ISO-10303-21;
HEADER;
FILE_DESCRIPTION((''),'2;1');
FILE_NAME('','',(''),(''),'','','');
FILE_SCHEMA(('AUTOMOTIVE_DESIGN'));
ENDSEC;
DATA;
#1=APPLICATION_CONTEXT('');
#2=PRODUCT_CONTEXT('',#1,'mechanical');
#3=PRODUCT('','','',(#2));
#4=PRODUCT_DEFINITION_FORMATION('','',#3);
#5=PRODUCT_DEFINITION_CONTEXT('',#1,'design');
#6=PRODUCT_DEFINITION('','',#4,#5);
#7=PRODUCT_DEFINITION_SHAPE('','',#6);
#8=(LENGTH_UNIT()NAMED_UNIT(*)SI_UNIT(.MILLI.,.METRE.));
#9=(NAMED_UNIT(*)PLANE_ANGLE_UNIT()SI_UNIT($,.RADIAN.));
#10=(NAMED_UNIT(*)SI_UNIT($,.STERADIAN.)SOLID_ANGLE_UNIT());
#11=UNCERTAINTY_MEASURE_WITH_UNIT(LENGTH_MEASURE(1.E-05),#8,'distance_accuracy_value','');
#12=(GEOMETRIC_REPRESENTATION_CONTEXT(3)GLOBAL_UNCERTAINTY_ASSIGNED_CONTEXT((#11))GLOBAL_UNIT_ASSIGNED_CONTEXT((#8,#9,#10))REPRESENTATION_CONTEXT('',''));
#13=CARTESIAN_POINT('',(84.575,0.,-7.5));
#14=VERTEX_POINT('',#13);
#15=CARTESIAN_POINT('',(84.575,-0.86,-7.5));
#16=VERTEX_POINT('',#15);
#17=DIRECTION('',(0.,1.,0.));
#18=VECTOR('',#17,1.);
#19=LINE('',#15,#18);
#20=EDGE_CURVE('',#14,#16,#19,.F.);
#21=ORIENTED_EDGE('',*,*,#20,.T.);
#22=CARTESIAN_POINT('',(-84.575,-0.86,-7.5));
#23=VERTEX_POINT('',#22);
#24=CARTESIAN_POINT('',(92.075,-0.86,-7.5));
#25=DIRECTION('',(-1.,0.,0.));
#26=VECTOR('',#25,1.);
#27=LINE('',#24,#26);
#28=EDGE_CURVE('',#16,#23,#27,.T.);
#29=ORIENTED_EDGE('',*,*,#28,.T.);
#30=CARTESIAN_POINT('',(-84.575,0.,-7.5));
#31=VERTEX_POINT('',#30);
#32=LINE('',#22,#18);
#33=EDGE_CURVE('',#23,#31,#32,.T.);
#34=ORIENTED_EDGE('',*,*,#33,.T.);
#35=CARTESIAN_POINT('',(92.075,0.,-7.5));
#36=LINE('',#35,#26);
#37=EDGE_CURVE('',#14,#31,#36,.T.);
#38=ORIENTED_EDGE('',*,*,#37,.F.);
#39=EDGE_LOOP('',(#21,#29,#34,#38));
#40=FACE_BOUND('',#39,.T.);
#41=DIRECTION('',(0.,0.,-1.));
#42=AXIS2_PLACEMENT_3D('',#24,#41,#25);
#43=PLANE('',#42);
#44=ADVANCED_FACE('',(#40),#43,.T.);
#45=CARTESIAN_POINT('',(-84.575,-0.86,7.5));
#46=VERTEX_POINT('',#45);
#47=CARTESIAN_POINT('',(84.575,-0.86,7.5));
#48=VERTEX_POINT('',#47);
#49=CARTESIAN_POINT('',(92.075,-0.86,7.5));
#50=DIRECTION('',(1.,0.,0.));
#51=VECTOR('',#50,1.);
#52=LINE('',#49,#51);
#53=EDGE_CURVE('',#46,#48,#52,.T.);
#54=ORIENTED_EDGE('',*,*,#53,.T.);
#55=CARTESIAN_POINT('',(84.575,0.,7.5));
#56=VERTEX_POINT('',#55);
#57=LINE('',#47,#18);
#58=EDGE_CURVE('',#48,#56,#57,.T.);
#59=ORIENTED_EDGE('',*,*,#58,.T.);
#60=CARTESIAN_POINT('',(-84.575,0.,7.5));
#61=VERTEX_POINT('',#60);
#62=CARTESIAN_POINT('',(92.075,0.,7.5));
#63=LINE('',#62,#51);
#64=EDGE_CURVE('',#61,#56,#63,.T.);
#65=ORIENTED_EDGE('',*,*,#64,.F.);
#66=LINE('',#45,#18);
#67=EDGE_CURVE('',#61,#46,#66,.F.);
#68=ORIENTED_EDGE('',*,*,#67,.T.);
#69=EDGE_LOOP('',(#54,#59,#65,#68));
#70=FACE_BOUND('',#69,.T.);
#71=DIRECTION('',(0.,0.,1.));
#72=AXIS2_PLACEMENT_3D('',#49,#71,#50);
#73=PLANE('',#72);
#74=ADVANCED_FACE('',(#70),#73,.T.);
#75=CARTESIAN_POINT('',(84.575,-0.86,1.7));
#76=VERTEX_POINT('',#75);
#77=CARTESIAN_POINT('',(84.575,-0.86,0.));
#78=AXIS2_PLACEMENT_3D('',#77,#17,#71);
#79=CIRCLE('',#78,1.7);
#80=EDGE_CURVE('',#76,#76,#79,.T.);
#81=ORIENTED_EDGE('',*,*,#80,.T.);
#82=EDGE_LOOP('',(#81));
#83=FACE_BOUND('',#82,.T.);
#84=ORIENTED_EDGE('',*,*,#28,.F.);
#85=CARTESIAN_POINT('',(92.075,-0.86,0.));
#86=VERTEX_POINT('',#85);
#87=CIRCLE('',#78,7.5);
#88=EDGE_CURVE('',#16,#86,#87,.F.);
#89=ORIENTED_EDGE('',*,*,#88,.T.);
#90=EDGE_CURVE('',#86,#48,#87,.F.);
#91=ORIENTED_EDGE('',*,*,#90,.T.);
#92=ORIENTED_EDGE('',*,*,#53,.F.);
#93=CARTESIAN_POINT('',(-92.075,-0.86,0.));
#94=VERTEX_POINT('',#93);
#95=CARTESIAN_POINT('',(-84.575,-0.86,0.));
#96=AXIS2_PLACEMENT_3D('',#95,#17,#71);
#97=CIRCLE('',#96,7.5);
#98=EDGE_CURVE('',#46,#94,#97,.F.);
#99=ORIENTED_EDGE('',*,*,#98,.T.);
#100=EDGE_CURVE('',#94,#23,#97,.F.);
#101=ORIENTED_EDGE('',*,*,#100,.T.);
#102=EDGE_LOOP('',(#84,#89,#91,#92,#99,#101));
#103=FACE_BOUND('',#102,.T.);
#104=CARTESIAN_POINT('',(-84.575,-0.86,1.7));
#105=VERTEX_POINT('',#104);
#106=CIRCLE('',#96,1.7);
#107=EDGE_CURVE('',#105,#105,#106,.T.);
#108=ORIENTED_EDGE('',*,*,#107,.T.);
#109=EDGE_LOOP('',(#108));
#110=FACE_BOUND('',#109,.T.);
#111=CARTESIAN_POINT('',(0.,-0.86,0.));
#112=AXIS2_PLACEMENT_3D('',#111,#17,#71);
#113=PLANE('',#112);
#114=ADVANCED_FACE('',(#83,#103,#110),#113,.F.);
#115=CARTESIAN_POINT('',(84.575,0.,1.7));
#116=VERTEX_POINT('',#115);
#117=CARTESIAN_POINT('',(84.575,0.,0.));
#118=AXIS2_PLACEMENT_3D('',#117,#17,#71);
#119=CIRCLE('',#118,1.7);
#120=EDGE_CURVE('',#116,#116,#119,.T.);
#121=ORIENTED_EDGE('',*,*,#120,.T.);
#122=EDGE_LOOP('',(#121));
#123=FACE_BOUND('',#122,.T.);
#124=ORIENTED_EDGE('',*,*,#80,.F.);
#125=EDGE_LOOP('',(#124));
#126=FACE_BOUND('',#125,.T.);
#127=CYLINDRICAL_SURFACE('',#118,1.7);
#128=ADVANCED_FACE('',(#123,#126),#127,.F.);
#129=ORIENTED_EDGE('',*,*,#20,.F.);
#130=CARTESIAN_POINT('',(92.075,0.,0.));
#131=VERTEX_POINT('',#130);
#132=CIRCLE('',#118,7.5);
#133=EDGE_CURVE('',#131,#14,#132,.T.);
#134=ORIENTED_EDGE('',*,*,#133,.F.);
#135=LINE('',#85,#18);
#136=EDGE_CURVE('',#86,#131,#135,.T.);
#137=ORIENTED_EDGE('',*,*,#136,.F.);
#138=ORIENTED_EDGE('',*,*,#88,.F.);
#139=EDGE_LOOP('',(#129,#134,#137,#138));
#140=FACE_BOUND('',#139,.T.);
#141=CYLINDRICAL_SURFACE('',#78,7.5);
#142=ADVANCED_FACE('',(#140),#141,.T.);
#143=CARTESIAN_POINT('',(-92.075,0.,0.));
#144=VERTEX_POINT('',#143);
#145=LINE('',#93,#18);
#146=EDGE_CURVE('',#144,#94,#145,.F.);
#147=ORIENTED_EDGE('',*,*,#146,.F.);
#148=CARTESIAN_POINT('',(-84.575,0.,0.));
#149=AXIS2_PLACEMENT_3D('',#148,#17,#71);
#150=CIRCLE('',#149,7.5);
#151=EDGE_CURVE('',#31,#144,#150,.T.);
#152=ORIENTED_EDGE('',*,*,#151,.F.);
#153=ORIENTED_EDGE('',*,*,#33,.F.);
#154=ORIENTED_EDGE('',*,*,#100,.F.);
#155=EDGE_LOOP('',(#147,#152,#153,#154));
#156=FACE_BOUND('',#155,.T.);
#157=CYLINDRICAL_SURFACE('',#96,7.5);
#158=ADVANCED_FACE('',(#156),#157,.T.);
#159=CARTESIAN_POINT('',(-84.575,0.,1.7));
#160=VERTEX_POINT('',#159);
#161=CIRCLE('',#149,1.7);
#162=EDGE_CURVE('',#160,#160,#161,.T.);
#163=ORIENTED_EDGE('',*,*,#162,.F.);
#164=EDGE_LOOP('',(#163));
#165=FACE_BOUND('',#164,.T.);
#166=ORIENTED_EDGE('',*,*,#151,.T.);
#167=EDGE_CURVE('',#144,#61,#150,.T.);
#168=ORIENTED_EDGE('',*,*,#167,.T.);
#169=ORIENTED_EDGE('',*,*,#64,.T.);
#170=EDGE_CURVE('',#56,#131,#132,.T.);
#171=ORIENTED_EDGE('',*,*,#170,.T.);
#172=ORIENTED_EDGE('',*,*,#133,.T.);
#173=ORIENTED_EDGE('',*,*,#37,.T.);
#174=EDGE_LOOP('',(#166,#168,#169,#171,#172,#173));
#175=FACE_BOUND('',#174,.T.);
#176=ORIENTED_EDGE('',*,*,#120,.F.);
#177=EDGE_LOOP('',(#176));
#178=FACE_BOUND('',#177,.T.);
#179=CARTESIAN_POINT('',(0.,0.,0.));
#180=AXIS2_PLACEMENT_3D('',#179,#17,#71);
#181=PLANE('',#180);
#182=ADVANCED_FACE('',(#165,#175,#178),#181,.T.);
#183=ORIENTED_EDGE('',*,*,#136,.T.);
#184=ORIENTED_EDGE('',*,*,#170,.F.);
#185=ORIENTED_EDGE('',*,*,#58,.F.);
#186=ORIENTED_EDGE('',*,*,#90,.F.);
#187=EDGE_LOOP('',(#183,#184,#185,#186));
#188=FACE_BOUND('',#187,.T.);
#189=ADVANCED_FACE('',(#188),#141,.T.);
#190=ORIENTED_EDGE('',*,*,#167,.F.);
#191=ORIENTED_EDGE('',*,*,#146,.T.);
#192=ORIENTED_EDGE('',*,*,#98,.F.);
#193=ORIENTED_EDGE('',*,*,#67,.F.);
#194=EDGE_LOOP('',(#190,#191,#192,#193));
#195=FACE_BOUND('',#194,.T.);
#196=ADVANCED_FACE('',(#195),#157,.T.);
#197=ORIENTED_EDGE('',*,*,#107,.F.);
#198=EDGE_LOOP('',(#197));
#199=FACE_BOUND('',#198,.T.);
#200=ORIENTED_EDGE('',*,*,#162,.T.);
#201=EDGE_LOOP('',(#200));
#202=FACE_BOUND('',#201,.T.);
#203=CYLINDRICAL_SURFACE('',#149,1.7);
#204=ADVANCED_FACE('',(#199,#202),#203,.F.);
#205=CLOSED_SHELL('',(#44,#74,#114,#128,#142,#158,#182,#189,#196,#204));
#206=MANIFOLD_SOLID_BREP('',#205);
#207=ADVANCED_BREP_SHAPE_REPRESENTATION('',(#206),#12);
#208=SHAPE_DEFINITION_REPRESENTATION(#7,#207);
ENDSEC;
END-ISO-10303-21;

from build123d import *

# Parameters (mm, degrees)
SKETCH2_W                = 184.15
SKETCH2_H                = 15
BASE_FLANGE1_DEPTH       = 0.86
M3_CLEARANCE_HOLE1_D     = 3.4
M3_CLEARANCE_HOLE1_DEPTH = 1.29
M3_CLEARANCE_HOLE1_TIP   = 1.021463052
FILLET1_R                = 7.5


# Sheet-metal steps are written as plain solids
with BuildPart() as part:
    # Sketch2 → Base-Flange1 (new body)
    with BuildSketch(Plane(origin=(0, 0, 0), x_dir=(1, 0, 0), z_dir=(0, 1, 0))):
        Rectangle(SKETCH2_W, SKETCH2_H)
    extrude(amount=-BASE_FLANGE1_DEPTH)

    # M3 Clearance Hole1
    with Locations(Plane(origin=(0, 0, 0), x_dir=(1, 0, 0), z_dir=(0, 1, 0))):
        with Locations((-84.575, 0), (84.575, 0)):
            Hole(M3_CLEARANCE_HOLE1_D / 2, depth=M3_CLEARANCE_HOLE1_DEPTH)
            with Locations((0, 0, -(M3_CLEARANCE_HOLE1_DEPTH + M3_CLEARANCE_HOLE1_TIP / 2))):  # 118° drill point
                Cone(0, M3_CLEARANCE_HOLE1_D / 2, M3_CLEARANCE_HOLE1_TIP, mode=Mode.SUBTRACT)

    # Fillet1
    fillet1_edges = [part.edges().sort_by_distance(p)[0] for p in [
        (92.075, -0.43, 7.5),
        (92.075, -0.43, -7.5),
        (-92.075, -0.43, 7.5),
        (-92.075, -0.43, -7.5),
    ]]
    fillet(fillet1_edges, radius=FILLET1_R - 0.0001)  # a hair under: the kernel refuses the full size


solid = part.part
